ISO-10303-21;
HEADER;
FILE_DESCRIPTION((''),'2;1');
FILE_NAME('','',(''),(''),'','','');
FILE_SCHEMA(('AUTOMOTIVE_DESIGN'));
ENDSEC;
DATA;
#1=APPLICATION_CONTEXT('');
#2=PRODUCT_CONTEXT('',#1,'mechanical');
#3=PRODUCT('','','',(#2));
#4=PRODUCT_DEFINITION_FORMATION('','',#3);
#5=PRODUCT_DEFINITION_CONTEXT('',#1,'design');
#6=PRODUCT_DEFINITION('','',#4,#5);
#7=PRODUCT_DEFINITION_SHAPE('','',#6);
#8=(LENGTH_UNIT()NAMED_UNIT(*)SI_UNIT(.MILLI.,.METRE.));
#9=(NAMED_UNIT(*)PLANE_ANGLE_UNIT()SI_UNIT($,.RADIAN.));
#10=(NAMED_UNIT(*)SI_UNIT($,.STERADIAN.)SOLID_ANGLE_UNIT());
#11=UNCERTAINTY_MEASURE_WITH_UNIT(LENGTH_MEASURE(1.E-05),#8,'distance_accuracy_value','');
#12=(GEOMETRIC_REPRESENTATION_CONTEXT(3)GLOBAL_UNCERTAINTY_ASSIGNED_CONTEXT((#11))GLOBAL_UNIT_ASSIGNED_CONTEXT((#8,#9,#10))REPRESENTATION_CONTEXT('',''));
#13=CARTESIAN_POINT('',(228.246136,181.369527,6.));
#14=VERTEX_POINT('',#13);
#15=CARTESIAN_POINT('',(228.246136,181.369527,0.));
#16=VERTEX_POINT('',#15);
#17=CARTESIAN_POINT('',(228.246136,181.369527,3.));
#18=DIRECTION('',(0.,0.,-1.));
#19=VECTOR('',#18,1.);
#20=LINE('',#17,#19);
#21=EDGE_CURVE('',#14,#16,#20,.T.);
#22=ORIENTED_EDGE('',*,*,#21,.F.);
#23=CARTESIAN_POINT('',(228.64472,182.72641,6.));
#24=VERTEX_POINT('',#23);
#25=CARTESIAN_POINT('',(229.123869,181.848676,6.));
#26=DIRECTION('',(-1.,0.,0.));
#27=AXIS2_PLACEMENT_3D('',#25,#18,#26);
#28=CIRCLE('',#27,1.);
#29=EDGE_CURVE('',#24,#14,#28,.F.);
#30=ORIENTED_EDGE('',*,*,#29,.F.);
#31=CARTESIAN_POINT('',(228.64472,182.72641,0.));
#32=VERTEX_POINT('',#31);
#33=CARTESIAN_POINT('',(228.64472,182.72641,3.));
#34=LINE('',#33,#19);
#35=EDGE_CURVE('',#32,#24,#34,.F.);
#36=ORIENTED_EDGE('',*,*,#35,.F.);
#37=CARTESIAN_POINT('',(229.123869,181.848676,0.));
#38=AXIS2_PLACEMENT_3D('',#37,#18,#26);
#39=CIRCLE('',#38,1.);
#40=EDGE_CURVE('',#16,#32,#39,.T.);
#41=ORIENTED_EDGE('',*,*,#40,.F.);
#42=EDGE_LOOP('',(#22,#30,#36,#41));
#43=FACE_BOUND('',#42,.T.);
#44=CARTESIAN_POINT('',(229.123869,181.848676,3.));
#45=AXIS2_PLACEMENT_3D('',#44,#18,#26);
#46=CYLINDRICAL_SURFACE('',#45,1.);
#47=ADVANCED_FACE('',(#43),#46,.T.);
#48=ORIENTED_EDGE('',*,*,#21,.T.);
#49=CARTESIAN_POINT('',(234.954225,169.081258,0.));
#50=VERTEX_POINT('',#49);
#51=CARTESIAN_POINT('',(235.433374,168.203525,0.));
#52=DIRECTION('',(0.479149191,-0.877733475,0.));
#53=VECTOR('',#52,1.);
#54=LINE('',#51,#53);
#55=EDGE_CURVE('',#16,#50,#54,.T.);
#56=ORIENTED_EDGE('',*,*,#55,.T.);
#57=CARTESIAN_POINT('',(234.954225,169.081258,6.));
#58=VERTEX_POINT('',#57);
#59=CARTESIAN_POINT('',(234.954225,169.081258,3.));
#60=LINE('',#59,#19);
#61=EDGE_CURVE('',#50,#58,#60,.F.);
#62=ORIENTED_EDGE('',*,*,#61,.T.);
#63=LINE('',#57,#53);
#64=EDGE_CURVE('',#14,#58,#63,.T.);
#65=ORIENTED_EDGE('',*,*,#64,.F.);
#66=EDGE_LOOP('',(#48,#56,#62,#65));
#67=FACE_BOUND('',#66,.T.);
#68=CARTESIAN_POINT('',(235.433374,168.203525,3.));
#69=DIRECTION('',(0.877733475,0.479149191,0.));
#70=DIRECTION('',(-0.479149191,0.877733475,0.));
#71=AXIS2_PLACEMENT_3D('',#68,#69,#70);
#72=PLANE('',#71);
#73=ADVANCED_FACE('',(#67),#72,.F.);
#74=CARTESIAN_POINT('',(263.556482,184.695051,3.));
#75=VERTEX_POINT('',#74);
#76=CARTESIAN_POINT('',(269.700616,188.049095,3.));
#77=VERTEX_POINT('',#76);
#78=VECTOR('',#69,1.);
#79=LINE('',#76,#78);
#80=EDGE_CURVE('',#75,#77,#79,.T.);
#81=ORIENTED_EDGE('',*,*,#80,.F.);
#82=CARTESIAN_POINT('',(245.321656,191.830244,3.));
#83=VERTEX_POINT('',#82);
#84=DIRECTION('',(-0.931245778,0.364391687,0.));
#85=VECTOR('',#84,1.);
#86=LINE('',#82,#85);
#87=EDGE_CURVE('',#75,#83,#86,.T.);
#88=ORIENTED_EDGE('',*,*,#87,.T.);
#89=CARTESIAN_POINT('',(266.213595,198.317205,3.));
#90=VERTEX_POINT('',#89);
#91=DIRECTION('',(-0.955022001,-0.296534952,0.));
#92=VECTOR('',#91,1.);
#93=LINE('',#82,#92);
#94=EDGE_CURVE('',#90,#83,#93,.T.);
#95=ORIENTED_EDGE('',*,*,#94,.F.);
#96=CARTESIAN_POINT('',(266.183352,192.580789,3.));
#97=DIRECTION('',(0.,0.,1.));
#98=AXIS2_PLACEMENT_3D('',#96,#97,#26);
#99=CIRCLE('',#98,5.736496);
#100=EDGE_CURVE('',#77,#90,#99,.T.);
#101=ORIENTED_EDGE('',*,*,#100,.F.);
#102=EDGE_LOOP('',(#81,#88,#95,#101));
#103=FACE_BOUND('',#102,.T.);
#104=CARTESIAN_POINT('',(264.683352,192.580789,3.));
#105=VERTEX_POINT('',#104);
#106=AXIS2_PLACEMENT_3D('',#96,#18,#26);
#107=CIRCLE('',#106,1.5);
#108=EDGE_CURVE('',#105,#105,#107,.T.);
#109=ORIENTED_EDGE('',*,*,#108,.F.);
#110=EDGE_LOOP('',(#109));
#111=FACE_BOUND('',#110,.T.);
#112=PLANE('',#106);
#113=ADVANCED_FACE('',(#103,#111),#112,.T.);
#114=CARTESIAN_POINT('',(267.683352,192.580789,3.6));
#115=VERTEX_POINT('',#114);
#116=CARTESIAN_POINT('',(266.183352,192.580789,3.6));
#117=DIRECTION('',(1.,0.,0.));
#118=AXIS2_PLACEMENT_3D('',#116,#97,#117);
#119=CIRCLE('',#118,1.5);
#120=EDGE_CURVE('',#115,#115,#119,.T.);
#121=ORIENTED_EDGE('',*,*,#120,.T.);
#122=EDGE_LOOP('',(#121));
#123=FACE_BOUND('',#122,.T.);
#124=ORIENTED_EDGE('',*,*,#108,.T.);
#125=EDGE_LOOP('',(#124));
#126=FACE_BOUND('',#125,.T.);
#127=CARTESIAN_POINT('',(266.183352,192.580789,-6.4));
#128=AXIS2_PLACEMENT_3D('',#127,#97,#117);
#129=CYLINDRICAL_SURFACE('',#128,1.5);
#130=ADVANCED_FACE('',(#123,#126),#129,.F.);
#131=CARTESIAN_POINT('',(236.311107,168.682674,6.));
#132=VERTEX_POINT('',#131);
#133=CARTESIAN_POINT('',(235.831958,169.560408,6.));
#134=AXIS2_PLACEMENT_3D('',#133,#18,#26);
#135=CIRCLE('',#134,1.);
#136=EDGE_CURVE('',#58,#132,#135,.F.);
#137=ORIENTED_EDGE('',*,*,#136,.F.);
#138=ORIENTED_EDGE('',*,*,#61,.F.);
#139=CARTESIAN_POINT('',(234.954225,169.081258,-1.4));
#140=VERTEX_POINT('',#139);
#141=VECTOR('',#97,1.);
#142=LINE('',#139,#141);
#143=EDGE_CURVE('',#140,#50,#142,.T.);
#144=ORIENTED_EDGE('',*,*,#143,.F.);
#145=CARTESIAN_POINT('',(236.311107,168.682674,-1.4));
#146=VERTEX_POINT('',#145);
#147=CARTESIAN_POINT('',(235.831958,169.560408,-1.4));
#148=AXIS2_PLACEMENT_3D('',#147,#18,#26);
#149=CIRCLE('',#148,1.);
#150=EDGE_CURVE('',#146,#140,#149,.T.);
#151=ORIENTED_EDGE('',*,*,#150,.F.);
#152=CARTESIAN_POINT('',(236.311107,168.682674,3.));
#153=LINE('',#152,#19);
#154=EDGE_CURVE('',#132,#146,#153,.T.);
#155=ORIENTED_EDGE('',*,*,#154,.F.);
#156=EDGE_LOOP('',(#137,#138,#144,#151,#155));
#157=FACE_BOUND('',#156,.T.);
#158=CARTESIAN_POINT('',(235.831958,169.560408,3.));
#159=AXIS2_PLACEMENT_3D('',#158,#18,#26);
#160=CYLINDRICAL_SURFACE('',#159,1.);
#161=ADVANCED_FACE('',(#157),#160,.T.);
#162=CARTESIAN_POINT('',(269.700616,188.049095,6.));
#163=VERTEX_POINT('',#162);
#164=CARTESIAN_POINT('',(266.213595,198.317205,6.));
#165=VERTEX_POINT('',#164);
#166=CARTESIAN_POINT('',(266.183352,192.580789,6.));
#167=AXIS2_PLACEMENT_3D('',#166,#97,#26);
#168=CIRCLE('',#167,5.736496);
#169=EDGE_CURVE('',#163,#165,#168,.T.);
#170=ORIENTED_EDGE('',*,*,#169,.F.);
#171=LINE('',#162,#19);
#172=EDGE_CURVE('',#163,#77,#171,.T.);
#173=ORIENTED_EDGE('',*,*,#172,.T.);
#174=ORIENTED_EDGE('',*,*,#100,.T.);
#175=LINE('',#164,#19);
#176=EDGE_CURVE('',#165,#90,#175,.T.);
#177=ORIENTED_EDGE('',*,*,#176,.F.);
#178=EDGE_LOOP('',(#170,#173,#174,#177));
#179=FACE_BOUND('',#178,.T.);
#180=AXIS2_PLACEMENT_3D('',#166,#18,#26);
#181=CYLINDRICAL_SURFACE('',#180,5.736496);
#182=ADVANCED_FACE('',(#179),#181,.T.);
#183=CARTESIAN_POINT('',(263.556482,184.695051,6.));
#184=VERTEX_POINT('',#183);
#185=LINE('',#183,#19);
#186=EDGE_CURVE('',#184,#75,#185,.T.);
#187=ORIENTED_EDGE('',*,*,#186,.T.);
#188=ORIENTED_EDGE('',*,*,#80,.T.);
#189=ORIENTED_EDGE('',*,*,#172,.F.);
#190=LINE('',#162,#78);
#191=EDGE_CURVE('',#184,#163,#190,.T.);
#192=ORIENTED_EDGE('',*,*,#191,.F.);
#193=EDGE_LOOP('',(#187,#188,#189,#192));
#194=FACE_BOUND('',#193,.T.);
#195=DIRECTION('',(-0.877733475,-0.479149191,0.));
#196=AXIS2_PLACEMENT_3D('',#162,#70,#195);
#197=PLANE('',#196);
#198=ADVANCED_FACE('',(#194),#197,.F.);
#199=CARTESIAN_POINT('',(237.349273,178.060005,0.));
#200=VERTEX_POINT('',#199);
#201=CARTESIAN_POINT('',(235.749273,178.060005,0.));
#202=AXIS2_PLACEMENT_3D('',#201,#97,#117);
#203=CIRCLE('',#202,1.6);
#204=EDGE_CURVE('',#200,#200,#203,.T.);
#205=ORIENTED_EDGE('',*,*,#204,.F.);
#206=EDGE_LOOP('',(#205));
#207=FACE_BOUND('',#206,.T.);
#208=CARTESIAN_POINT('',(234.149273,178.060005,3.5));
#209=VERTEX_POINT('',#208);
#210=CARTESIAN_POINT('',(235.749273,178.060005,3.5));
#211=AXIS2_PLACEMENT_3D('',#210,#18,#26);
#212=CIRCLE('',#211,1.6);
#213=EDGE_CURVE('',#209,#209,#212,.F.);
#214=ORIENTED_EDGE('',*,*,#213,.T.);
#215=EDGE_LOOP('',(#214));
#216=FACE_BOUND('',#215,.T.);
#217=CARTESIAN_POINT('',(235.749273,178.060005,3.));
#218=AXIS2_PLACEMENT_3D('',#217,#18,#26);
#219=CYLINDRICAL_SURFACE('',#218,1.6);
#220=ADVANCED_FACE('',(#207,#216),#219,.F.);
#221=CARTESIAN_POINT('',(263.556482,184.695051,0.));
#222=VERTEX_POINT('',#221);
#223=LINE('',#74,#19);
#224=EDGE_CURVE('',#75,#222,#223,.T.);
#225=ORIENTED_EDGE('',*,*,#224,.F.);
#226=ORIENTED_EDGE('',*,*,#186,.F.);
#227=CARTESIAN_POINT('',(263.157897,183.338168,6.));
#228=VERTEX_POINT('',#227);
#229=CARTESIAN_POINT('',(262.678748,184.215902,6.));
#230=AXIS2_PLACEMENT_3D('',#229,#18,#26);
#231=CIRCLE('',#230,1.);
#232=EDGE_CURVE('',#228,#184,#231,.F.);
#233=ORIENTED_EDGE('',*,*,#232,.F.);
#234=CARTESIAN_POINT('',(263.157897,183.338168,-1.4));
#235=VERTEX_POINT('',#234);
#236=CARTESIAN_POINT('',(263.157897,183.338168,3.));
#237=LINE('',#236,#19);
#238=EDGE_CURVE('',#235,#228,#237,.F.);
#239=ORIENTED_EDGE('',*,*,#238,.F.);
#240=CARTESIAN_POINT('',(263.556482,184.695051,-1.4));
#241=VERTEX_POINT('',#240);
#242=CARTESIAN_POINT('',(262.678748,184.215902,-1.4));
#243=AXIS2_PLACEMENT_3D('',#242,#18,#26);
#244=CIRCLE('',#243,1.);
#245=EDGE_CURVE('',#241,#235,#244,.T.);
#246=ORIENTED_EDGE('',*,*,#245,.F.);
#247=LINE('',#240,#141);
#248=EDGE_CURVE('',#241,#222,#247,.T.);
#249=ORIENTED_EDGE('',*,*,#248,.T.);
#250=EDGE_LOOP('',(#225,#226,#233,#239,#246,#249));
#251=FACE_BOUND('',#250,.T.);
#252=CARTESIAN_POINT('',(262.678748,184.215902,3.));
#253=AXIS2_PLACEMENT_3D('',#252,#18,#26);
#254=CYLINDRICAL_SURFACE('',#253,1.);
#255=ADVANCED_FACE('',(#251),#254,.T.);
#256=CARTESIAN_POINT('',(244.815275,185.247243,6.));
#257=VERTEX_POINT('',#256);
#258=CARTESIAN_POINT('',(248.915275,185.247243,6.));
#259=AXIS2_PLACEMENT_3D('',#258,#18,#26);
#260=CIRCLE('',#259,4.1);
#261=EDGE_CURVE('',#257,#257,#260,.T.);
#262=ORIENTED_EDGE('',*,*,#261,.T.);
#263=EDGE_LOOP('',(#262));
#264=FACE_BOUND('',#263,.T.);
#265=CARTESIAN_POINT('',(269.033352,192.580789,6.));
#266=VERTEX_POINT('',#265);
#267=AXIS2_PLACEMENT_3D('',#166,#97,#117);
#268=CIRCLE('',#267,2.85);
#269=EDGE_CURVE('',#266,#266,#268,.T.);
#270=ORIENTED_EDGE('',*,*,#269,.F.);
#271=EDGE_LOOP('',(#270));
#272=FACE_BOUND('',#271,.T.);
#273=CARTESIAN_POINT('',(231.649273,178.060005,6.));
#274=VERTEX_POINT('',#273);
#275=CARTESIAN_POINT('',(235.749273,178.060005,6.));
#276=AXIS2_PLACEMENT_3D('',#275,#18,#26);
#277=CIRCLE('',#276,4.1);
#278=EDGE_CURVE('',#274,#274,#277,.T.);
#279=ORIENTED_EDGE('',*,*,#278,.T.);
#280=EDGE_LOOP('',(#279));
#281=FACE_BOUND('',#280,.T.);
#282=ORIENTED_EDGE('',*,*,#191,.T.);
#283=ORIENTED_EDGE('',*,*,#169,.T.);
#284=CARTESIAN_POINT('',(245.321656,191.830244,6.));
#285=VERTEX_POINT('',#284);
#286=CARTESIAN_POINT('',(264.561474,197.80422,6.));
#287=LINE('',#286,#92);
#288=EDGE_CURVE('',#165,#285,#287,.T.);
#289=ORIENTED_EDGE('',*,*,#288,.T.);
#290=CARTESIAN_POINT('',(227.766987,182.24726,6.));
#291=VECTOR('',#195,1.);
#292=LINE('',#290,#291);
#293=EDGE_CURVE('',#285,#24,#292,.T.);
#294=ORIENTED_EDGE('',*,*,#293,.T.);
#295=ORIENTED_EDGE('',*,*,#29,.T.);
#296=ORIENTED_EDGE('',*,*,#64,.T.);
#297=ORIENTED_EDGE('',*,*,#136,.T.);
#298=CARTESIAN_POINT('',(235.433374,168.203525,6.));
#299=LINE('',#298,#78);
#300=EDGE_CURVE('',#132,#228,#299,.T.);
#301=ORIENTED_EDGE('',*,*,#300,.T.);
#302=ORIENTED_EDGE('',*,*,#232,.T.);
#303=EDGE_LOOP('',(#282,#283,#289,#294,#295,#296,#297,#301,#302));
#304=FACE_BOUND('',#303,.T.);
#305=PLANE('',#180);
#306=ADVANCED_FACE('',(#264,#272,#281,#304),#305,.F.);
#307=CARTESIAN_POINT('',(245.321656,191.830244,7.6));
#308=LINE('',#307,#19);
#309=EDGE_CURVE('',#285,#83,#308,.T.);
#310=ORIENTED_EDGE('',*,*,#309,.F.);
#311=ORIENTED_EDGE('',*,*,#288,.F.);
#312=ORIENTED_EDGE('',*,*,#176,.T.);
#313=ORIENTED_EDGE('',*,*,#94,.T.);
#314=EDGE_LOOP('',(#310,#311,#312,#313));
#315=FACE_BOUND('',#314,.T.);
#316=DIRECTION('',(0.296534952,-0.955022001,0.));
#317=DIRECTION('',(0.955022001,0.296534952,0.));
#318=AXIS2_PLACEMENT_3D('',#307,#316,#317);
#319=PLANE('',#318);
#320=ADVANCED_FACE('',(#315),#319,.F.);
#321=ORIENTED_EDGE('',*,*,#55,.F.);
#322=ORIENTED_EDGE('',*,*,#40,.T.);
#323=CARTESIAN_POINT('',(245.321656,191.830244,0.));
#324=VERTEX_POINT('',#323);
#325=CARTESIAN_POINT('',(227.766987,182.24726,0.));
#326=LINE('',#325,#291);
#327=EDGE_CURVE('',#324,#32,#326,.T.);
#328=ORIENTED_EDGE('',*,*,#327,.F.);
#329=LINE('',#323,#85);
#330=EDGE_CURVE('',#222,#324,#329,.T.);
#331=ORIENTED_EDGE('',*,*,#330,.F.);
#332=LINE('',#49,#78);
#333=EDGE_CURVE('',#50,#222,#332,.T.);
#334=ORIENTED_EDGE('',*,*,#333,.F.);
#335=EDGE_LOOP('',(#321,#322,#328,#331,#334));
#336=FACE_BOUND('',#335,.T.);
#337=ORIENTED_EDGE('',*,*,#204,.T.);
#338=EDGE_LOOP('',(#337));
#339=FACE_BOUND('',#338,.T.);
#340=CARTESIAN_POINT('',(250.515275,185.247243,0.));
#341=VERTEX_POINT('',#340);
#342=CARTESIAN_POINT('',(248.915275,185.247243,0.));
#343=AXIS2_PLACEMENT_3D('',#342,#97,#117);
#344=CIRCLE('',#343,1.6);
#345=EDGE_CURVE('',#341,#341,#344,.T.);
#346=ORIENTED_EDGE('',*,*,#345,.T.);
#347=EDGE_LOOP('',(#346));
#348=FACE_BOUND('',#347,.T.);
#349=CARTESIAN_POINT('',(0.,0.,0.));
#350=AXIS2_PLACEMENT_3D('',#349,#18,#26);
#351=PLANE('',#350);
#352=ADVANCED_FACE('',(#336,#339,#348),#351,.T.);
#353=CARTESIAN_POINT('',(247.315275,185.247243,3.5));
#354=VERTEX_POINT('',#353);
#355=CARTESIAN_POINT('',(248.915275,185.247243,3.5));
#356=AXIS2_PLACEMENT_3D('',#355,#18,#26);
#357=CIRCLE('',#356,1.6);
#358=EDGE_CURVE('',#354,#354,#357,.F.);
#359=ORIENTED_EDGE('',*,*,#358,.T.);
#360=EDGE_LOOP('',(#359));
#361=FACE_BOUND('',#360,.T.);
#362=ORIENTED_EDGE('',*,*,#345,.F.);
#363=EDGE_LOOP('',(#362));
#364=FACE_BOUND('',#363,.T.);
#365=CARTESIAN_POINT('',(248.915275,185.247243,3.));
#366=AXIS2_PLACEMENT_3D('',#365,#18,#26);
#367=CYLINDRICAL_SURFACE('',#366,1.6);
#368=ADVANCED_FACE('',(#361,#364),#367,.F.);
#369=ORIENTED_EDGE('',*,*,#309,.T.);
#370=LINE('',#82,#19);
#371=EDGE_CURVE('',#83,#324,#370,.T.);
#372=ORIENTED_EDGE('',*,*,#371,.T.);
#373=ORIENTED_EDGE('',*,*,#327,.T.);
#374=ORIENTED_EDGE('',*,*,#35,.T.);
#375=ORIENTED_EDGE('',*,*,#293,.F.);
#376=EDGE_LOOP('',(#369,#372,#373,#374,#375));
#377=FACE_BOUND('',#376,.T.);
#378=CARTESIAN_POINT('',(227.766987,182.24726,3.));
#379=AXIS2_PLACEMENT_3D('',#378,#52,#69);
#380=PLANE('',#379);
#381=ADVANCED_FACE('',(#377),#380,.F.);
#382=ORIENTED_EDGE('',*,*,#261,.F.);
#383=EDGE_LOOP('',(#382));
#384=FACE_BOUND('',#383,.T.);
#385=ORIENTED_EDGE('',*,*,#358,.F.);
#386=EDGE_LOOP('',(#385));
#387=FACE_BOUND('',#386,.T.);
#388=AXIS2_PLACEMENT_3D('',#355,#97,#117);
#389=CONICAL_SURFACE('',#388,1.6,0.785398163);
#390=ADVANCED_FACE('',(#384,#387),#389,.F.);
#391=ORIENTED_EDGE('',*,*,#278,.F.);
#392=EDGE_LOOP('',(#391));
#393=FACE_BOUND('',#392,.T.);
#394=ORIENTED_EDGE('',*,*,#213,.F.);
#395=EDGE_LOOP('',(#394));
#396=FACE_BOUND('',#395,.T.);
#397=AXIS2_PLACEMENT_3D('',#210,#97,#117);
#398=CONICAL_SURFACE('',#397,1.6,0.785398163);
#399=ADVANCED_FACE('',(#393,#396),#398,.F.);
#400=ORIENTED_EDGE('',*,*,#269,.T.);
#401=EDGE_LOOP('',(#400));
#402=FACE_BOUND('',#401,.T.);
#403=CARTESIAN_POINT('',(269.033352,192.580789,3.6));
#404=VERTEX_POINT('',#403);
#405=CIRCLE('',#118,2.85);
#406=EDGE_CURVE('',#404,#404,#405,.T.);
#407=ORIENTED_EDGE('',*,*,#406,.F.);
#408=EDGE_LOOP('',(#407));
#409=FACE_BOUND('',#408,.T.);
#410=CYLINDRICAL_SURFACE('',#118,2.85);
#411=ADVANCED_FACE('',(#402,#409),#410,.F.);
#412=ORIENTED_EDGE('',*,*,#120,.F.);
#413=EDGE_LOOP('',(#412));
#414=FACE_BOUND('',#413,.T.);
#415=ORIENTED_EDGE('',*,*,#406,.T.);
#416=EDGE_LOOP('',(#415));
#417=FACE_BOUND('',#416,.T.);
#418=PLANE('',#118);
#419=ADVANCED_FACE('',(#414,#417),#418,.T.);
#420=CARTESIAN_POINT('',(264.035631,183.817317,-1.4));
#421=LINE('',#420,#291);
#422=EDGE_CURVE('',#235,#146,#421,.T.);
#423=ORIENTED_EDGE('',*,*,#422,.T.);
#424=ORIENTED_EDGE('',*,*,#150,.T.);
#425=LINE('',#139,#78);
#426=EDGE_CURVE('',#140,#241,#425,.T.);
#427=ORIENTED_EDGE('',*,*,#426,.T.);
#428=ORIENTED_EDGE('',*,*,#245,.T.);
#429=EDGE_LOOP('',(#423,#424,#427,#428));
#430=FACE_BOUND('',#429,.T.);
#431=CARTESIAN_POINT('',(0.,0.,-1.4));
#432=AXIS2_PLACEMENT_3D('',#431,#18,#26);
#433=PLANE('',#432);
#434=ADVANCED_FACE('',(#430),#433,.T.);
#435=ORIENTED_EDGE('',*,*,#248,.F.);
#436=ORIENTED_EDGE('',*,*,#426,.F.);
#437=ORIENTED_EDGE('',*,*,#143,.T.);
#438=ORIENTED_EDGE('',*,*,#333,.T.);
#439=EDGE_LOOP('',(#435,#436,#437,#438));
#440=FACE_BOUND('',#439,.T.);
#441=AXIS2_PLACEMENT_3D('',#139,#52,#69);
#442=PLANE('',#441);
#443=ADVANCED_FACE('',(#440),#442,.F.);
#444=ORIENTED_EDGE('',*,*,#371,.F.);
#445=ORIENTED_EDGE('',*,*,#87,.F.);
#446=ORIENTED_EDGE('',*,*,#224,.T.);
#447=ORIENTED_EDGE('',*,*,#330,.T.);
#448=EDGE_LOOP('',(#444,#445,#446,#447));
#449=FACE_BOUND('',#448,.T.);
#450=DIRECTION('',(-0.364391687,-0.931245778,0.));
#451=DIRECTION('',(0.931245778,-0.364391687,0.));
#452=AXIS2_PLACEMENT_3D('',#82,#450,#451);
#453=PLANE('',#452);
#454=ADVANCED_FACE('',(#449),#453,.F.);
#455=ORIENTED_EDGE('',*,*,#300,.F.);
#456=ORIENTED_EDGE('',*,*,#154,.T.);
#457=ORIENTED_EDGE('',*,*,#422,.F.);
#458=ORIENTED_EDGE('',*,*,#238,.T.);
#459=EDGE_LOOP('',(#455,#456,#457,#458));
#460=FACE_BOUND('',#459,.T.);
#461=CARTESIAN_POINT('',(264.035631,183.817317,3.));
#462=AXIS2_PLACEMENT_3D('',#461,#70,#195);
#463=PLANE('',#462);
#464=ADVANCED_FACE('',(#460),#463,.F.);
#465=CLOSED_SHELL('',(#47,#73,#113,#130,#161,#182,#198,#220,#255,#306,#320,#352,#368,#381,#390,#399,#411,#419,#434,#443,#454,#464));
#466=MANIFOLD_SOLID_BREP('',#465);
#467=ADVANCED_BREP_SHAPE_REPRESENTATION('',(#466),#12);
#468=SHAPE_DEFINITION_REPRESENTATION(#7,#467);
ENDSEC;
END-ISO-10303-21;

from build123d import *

# Parameters (mm, degrees)
SKETCH4_R           = 1.6
BOSS_EXTRUDE1_DEPTH = 3
BOSS_EXTRUDE2_DEPTH = 1.4
SKETCH6_R           = 1.6
BOSS_EXTRUDE3_DEPTH = 3
SKETCH7_R           = 2.85
CUT_EXTRUDE1_DEPTH  = 2.4
CUT_EXTRUDE2_DEPTH  = 4.6
SKETCH10_R          = 1.5
CUT_EXTRUDE3_DEPTH  = 10
CHAMFER1_SIZE       = 2.5
FILLET1_R           = 1


with BuildPart() as part:
    # Sketch4 → Boss-Extrude1 (new body)
    with BuildSketch(Plane.XY):
        Polygon((263.556481558, 184.695050819), (264.03563075, 183.817317345), (235.433373737, 168.203524869), (234.954224546, 169.081258344), (227.766986674, 182.247260462), (245.321656165, 191.830244291), align=None)
        with Locations((235.749272983, 178.06000536)):
            Circle(SKETCH4_R, mode=Mode.SUBTRACT)
        with Locations((248.915275101, 185.247243232)):
            Circle(SKETCH4_R, mode=Mode.SUBTRACT)
    extrude(amount=BOSS_EXTRUDE1_DEPTH)

    # Sketch5 → Boss-Extrude2 (add)
    with BuildSketch(Plane(origin=(0, 0, 0), x_dir=(-1, 0, 0), z_dir=(0, 0, -1))):
        Polygon((-263.556481558, 184.695050819), (-264.03563075, 183.817317345), (-235.433373737, 168.203524869), (-234.954224546, 169.081258344), align=None)
    extrude(amount=BOSS_EXTRUDE2_DEPTH)

    # Sketch6 → Boss-Extrude3 (add)
    with BuildSketch(Plane.XY.offset(3)):
        with BuildLine():
            Line((227.766986674, 182.247260462), (257.291019991, 198.364244833))
            Line((257.291019991, 198.364244833), (266.21359493, 198.317204861))
            ThreePointArc((266.21359493, 198.317204861), (271.61517707, 194.425420779), (269.70061588, 188.049095159))
            Line((269.70061588, 188.049095159), (263.556481558, 184.695050819))
            Line((263.556481558, 184.695050819), (264.03563075, 183.817317345))
            Line((264.03563075, 183.817317345), (235.433373737, 168.203524869))
            Line((235.433373737, 168.203524869), (234.954224546, 169.081258344))
            Line((234.954224546, 169.081258344), (227.766986674, 182.247260462))
        make_face()
        with Locations((248.915275101, 185.247243232)):
            Circle(SKETCH6_R, mode=Mode.SUBTRACT)
        with Locations((235.749272983, 178.06000536)):
            Circle(SKETCH6_R, mode=Mode.SUBTRACT)
    extrude(amount=BOSS_EXTRUDE3_DEPTH)

    # Sketch7 → Cut-Extrude1 (cut)
    with BuildSketch(Plane.XY.offset(6)):
        with Locations((266.183352442, 192.580788532)):
            Circle(SKETCH7_R)
    extrude(amount=-CUT_EXTRUDE1_DEPTH, mode=Mode.SUBTRACT)

    # Sketch9 → Cut-Extrude2 (cut)
    with BuildSketch(Plane(origin=(0, 0, 3), x_dir=(-1, 0, 0), z_dir=(0, 0, -1))):
        Polygon((-245.321656165, 191.830244291), (-266.21359493, 198.317204861), (-257.291019991, 198.364244833), align=None)
    extrude(amount=-CUT_EXTRUDE2_DEPTH, mode=Mode.SUBTRACT)

    # Sketch10 → Cut-Extrude3 (cut)
    with BuildSketch(Plane.XY.offset(3.6)):
        with Locations((266.183352442, 192.580788532)):
            Circle(SKETCH10_R)
    extrude(amount=-CUT_EXTRUDE3_DEPTH, mode=Mode.SUBTRACT)

    # Chamfer1
    chamfer1_edges = [part.edges().sort_by_distance(p)[0] for p in [
        (247.315275101, 185.247243232, 6),
        (234.149272983, 178.06000536, 6),
    ]]
    chamfer(chamfer1_edges, length=CHAMFER1_SIZE)

    # Fillet1
    fillet1_edges = [part.edges().sort_by_distance(p)[0] for p in [
        (264.03563075, 183.817317345, 2.3),
        (227.766986674, 182.247260462, 3),
        (235.433373737, 168.203524869, 2.3),
    ]]
    fillet(fillet1_edges, radius=FILLET1_R - 0.0001)  # a hair under: the kernel refuses the full size


solid = part.part
